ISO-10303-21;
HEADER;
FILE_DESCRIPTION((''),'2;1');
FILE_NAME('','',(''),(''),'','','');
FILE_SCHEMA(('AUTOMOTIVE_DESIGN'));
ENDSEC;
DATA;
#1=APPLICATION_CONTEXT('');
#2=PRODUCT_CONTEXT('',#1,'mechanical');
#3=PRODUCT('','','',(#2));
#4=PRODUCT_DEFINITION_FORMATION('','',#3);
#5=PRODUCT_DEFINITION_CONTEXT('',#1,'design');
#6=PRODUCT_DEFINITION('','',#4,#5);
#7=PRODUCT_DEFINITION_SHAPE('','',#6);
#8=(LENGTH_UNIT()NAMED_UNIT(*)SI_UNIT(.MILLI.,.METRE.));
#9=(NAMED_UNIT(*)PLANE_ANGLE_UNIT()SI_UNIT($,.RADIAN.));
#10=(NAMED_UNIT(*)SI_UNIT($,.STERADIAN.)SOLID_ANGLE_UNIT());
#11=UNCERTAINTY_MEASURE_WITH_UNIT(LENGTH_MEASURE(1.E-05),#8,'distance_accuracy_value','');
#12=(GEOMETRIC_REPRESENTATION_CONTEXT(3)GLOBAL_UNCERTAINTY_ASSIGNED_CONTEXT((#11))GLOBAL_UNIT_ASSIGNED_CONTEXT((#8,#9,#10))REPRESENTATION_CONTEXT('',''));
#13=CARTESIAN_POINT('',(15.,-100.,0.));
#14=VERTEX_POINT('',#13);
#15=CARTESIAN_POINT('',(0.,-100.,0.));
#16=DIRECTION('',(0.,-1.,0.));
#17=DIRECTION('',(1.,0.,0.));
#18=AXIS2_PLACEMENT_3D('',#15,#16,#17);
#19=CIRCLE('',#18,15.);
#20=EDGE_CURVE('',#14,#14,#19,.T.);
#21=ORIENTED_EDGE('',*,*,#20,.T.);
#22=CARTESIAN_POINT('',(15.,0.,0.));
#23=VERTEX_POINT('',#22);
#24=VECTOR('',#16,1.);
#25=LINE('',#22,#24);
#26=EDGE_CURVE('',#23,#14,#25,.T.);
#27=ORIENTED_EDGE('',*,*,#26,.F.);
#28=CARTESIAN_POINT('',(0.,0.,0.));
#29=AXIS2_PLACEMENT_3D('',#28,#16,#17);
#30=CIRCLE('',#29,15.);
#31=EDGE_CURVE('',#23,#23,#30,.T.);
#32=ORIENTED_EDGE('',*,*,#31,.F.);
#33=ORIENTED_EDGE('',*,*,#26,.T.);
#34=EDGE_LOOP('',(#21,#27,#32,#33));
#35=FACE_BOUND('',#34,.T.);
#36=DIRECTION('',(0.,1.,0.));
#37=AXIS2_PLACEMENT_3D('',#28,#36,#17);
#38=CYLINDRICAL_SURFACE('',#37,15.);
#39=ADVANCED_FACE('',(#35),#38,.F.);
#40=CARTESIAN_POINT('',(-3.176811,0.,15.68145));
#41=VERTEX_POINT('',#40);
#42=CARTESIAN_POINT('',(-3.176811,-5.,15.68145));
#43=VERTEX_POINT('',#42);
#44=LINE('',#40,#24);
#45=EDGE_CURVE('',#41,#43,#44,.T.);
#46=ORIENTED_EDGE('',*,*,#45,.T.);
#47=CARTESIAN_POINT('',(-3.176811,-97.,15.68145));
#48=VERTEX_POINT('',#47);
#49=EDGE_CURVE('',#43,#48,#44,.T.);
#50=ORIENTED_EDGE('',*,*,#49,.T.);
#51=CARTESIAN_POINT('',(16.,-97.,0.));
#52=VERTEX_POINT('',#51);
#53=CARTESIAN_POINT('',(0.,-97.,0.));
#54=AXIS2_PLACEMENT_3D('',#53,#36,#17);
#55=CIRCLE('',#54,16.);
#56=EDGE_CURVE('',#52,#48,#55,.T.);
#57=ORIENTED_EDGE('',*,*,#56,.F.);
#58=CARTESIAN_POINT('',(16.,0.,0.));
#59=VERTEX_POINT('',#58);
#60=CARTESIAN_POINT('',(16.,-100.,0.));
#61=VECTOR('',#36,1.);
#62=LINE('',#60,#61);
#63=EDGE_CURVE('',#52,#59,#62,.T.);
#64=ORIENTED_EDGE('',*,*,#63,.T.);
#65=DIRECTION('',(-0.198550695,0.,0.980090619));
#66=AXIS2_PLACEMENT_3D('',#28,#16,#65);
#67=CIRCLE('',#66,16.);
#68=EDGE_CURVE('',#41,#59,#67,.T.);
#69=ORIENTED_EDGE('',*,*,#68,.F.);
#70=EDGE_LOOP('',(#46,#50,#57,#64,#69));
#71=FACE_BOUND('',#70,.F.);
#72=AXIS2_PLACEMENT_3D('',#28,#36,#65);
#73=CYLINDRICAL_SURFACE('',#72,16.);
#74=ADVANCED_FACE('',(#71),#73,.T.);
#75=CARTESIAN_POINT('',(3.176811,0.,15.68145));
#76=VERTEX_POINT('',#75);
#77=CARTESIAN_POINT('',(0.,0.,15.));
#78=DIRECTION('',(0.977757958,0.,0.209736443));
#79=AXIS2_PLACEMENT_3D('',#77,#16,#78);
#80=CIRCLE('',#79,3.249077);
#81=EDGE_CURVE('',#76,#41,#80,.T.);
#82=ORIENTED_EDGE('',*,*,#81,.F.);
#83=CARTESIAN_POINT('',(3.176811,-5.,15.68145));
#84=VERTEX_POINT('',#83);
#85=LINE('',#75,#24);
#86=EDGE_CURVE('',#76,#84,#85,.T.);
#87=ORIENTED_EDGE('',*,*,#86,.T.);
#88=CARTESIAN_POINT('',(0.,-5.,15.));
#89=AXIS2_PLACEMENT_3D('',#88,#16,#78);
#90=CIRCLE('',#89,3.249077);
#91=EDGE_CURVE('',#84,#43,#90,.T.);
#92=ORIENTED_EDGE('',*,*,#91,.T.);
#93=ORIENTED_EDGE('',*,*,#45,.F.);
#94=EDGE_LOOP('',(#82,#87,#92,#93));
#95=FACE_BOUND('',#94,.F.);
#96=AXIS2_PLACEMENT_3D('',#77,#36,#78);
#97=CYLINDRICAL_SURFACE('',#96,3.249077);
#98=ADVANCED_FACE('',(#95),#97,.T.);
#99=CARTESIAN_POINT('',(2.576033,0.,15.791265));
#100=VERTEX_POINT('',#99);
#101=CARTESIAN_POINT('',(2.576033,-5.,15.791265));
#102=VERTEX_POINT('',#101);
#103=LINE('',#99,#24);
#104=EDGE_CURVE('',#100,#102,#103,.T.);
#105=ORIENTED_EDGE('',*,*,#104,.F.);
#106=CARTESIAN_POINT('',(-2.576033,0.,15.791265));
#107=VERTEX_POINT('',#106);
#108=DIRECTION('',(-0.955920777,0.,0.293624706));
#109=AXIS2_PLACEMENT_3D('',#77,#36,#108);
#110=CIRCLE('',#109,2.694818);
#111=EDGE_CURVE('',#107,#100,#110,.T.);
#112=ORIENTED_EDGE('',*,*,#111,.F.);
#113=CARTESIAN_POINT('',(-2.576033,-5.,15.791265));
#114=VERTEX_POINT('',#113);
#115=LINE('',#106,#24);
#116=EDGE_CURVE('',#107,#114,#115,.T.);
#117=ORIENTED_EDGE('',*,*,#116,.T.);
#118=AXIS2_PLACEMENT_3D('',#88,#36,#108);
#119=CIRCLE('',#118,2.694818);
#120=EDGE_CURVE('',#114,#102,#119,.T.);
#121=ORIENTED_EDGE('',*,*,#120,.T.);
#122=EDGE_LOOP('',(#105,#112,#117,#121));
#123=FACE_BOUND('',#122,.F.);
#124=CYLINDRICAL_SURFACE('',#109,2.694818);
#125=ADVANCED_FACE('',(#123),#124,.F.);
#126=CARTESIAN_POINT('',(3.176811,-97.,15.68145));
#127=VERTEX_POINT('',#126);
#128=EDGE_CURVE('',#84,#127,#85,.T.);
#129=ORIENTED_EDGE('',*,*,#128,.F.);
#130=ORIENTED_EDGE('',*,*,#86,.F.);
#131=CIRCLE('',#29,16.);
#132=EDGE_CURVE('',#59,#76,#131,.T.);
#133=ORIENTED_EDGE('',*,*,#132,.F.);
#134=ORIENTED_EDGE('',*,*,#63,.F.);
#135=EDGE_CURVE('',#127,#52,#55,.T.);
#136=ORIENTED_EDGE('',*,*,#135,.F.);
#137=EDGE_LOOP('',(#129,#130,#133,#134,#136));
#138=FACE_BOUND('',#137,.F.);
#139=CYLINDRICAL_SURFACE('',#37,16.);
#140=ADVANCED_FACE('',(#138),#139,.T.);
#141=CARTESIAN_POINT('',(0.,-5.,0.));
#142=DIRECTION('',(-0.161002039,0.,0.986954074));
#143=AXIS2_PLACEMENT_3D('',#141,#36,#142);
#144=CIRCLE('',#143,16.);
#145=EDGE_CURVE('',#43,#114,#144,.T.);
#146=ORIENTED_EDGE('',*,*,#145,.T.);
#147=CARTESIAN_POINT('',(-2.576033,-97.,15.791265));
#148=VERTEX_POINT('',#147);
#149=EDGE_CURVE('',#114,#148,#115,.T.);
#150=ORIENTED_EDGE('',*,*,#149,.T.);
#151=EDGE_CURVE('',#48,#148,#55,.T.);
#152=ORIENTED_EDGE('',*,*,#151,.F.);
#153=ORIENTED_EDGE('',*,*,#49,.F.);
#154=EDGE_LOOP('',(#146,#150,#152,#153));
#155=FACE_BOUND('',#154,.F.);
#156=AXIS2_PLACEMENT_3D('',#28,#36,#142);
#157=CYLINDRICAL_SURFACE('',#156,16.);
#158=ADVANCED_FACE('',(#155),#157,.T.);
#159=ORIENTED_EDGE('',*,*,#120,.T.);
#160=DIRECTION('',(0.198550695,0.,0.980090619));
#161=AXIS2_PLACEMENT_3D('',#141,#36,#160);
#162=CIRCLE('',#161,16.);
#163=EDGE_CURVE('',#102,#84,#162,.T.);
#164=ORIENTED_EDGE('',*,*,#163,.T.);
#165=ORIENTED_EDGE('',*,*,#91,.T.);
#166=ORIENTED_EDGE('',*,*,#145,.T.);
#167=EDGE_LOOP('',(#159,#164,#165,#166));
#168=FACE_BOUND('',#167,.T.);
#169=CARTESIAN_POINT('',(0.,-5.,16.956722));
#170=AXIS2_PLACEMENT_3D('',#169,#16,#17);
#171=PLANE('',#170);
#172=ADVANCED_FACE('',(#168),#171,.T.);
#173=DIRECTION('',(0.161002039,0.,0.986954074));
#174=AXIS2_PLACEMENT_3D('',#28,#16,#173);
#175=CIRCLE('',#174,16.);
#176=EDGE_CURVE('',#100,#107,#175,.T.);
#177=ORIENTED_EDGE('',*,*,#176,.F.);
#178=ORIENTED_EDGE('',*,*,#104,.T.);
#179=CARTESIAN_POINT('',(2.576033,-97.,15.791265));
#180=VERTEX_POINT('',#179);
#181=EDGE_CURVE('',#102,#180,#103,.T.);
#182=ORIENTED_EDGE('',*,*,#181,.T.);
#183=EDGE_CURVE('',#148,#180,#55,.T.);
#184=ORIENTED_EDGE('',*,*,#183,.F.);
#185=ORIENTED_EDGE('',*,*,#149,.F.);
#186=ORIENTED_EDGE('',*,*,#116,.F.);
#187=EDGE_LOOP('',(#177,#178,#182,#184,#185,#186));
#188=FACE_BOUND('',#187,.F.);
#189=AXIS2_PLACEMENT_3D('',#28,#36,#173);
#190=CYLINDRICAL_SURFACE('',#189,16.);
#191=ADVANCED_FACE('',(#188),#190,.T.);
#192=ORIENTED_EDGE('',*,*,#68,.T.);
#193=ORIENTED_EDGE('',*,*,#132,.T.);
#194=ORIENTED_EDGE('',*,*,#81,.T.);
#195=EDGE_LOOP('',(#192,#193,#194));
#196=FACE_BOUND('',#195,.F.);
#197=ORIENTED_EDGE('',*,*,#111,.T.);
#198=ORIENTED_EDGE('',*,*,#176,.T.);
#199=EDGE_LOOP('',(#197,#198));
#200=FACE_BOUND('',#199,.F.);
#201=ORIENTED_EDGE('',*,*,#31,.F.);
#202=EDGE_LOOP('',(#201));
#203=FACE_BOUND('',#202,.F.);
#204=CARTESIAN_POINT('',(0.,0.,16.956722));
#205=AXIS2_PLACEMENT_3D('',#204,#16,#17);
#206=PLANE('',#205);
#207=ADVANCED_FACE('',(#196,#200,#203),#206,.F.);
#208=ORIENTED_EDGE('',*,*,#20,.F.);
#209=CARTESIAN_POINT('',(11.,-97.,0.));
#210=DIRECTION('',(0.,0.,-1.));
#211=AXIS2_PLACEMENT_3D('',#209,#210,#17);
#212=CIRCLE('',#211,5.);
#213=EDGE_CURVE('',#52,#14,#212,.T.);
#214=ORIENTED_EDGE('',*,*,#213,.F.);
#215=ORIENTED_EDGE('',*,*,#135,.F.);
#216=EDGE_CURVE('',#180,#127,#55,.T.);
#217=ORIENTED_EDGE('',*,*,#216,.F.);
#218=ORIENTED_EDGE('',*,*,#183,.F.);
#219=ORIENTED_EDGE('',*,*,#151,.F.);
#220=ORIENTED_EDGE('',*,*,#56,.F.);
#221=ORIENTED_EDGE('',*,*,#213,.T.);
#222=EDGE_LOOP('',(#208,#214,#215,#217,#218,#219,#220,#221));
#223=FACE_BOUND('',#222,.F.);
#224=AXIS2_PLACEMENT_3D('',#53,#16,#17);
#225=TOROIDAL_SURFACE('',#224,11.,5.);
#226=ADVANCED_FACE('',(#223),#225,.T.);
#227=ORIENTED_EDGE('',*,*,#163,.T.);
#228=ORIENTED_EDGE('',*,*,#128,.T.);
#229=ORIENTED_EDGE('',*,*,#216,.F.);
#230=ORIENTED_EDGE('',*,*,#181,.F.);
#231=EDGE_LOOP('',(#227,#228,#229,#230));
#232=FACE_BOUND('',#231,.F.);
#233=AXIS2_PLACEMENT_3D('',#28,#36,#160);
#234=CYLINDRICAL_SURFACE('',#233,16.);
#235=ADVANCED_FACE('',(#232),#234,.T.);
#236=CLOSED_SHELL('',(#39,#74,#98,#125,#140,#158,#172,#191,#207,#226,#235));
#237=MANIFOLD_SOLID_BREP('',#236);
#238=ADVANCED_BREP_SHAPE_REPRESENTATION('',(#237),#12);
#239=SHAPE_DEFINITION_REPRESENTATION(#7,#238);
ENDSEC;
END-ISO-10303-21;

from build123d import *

# Parameters (mm, degrees)
F0_R     = 15
F1_DEPTH = 100
F2_DEPTH = 5


# Not quite as in the source:
# - a fillet or chamfer that OpenCascade refuses, or shapes differently, is made with other operations: its cross-section is extruded or revolved along the edge and cut away or added


with BuildPart() as f1:
    # F0 (on Front) → F1 (new body)
    with BuildSketch(Plane.XZ):
        with BuildLine():
            ThreePointArc((3.1768111268, 15.6814499031), (2.876945892, 15.7392243244), (2.5760326281, 15.7912651773))
            ThreePointArc((2.5760326281, 15.7912651773), (0, 16), (-2.5760326281, 15.7912651773))
            ThreePointArc((-2.5760326281, 15.7912651773), (-2.876945892, 15.7392243244), (-3.1768111268, 15.6814499031))
            ThreePointArc((-3.1768111268, 15.6814499031), (-10.1284505718, -12.3860602701), (16, 0))
            ThreePointArc((16, 0), (12.3860602701, 10.1284505718), (3.1768111268, 15.6814499031))
        make_face()
        Circle(F0_R, mode=Mode.SUBTRACT)
    extrude(amount=F1_DEPTH)

    # F0 (on Front) → F2 (join)
    with BuildSketch(Plane.XZ):
        with BuildLine():
            ThreePointArc((-2.5760326281, 15.7912651773), (0, 17.6948181166), (2.5760326281, 15.7912651773))
            ThreePointArc((2.5760326281, 15.7912651773), (2.876945892, 15.7392243244), (3.1768111268, 15.6814499031))
            ThreePointArc((3.1768111268, 15.6814499031), (0, 18.2490772391), (-3.1768111268, 15.6814499031))
            ThreePointArc((-3.1768111268, 15.6814499031), (-2.876945892, 15.7392243244), (-2.5760326281, 15.7912651773))
        make_face()
        with BuildLine():
            ThreePointArc((3.1768111268, 15.6814499031), (2.876945892, 15.7392243244), (2.5760326281, 15.7912651773))
            ThreePointArc((2.5760326281, 15.7912651773), (0, 16), (-2.5760326281, 15.7912651773))
            ThreePointArc((-2.5760326281, 15.7912651773), (-2.876945892, 15.7392243244), (-3.1768111268, 15.6814499031))
            ThreePointArc((-3.1768111268, 15.6814499031), (-10.1284505718, -12.3860602701), (16, 0))
            ThreePointArc((16, 0), (12.3860602701, 10.1284505718), (3.1768111268, 15.6814499031))
        make_face()
        Circle(F0_R, mode=Mode.SUBTRACT)
    extrude(amount=F2_DEPTH)

    # F3: fillet of radius 5 on 1 edges, made by hand

    # F3_s1 → F3_t2 (revolve, cut)
    with BuildSketch(Plane.XY):
        with BuildLine():
            ThreePointArc((16, -97), (15.7434164903, -98.5811388301), (15, -100))
            Line((15, -100), (16, -100))
            Line((16, -100), (16, -97))
        make_face()
    revolve(axis=Axis((0, -100, 0), (0, 1, 0)), mode=Mode.SUBTRACT)


solid = f1.part
